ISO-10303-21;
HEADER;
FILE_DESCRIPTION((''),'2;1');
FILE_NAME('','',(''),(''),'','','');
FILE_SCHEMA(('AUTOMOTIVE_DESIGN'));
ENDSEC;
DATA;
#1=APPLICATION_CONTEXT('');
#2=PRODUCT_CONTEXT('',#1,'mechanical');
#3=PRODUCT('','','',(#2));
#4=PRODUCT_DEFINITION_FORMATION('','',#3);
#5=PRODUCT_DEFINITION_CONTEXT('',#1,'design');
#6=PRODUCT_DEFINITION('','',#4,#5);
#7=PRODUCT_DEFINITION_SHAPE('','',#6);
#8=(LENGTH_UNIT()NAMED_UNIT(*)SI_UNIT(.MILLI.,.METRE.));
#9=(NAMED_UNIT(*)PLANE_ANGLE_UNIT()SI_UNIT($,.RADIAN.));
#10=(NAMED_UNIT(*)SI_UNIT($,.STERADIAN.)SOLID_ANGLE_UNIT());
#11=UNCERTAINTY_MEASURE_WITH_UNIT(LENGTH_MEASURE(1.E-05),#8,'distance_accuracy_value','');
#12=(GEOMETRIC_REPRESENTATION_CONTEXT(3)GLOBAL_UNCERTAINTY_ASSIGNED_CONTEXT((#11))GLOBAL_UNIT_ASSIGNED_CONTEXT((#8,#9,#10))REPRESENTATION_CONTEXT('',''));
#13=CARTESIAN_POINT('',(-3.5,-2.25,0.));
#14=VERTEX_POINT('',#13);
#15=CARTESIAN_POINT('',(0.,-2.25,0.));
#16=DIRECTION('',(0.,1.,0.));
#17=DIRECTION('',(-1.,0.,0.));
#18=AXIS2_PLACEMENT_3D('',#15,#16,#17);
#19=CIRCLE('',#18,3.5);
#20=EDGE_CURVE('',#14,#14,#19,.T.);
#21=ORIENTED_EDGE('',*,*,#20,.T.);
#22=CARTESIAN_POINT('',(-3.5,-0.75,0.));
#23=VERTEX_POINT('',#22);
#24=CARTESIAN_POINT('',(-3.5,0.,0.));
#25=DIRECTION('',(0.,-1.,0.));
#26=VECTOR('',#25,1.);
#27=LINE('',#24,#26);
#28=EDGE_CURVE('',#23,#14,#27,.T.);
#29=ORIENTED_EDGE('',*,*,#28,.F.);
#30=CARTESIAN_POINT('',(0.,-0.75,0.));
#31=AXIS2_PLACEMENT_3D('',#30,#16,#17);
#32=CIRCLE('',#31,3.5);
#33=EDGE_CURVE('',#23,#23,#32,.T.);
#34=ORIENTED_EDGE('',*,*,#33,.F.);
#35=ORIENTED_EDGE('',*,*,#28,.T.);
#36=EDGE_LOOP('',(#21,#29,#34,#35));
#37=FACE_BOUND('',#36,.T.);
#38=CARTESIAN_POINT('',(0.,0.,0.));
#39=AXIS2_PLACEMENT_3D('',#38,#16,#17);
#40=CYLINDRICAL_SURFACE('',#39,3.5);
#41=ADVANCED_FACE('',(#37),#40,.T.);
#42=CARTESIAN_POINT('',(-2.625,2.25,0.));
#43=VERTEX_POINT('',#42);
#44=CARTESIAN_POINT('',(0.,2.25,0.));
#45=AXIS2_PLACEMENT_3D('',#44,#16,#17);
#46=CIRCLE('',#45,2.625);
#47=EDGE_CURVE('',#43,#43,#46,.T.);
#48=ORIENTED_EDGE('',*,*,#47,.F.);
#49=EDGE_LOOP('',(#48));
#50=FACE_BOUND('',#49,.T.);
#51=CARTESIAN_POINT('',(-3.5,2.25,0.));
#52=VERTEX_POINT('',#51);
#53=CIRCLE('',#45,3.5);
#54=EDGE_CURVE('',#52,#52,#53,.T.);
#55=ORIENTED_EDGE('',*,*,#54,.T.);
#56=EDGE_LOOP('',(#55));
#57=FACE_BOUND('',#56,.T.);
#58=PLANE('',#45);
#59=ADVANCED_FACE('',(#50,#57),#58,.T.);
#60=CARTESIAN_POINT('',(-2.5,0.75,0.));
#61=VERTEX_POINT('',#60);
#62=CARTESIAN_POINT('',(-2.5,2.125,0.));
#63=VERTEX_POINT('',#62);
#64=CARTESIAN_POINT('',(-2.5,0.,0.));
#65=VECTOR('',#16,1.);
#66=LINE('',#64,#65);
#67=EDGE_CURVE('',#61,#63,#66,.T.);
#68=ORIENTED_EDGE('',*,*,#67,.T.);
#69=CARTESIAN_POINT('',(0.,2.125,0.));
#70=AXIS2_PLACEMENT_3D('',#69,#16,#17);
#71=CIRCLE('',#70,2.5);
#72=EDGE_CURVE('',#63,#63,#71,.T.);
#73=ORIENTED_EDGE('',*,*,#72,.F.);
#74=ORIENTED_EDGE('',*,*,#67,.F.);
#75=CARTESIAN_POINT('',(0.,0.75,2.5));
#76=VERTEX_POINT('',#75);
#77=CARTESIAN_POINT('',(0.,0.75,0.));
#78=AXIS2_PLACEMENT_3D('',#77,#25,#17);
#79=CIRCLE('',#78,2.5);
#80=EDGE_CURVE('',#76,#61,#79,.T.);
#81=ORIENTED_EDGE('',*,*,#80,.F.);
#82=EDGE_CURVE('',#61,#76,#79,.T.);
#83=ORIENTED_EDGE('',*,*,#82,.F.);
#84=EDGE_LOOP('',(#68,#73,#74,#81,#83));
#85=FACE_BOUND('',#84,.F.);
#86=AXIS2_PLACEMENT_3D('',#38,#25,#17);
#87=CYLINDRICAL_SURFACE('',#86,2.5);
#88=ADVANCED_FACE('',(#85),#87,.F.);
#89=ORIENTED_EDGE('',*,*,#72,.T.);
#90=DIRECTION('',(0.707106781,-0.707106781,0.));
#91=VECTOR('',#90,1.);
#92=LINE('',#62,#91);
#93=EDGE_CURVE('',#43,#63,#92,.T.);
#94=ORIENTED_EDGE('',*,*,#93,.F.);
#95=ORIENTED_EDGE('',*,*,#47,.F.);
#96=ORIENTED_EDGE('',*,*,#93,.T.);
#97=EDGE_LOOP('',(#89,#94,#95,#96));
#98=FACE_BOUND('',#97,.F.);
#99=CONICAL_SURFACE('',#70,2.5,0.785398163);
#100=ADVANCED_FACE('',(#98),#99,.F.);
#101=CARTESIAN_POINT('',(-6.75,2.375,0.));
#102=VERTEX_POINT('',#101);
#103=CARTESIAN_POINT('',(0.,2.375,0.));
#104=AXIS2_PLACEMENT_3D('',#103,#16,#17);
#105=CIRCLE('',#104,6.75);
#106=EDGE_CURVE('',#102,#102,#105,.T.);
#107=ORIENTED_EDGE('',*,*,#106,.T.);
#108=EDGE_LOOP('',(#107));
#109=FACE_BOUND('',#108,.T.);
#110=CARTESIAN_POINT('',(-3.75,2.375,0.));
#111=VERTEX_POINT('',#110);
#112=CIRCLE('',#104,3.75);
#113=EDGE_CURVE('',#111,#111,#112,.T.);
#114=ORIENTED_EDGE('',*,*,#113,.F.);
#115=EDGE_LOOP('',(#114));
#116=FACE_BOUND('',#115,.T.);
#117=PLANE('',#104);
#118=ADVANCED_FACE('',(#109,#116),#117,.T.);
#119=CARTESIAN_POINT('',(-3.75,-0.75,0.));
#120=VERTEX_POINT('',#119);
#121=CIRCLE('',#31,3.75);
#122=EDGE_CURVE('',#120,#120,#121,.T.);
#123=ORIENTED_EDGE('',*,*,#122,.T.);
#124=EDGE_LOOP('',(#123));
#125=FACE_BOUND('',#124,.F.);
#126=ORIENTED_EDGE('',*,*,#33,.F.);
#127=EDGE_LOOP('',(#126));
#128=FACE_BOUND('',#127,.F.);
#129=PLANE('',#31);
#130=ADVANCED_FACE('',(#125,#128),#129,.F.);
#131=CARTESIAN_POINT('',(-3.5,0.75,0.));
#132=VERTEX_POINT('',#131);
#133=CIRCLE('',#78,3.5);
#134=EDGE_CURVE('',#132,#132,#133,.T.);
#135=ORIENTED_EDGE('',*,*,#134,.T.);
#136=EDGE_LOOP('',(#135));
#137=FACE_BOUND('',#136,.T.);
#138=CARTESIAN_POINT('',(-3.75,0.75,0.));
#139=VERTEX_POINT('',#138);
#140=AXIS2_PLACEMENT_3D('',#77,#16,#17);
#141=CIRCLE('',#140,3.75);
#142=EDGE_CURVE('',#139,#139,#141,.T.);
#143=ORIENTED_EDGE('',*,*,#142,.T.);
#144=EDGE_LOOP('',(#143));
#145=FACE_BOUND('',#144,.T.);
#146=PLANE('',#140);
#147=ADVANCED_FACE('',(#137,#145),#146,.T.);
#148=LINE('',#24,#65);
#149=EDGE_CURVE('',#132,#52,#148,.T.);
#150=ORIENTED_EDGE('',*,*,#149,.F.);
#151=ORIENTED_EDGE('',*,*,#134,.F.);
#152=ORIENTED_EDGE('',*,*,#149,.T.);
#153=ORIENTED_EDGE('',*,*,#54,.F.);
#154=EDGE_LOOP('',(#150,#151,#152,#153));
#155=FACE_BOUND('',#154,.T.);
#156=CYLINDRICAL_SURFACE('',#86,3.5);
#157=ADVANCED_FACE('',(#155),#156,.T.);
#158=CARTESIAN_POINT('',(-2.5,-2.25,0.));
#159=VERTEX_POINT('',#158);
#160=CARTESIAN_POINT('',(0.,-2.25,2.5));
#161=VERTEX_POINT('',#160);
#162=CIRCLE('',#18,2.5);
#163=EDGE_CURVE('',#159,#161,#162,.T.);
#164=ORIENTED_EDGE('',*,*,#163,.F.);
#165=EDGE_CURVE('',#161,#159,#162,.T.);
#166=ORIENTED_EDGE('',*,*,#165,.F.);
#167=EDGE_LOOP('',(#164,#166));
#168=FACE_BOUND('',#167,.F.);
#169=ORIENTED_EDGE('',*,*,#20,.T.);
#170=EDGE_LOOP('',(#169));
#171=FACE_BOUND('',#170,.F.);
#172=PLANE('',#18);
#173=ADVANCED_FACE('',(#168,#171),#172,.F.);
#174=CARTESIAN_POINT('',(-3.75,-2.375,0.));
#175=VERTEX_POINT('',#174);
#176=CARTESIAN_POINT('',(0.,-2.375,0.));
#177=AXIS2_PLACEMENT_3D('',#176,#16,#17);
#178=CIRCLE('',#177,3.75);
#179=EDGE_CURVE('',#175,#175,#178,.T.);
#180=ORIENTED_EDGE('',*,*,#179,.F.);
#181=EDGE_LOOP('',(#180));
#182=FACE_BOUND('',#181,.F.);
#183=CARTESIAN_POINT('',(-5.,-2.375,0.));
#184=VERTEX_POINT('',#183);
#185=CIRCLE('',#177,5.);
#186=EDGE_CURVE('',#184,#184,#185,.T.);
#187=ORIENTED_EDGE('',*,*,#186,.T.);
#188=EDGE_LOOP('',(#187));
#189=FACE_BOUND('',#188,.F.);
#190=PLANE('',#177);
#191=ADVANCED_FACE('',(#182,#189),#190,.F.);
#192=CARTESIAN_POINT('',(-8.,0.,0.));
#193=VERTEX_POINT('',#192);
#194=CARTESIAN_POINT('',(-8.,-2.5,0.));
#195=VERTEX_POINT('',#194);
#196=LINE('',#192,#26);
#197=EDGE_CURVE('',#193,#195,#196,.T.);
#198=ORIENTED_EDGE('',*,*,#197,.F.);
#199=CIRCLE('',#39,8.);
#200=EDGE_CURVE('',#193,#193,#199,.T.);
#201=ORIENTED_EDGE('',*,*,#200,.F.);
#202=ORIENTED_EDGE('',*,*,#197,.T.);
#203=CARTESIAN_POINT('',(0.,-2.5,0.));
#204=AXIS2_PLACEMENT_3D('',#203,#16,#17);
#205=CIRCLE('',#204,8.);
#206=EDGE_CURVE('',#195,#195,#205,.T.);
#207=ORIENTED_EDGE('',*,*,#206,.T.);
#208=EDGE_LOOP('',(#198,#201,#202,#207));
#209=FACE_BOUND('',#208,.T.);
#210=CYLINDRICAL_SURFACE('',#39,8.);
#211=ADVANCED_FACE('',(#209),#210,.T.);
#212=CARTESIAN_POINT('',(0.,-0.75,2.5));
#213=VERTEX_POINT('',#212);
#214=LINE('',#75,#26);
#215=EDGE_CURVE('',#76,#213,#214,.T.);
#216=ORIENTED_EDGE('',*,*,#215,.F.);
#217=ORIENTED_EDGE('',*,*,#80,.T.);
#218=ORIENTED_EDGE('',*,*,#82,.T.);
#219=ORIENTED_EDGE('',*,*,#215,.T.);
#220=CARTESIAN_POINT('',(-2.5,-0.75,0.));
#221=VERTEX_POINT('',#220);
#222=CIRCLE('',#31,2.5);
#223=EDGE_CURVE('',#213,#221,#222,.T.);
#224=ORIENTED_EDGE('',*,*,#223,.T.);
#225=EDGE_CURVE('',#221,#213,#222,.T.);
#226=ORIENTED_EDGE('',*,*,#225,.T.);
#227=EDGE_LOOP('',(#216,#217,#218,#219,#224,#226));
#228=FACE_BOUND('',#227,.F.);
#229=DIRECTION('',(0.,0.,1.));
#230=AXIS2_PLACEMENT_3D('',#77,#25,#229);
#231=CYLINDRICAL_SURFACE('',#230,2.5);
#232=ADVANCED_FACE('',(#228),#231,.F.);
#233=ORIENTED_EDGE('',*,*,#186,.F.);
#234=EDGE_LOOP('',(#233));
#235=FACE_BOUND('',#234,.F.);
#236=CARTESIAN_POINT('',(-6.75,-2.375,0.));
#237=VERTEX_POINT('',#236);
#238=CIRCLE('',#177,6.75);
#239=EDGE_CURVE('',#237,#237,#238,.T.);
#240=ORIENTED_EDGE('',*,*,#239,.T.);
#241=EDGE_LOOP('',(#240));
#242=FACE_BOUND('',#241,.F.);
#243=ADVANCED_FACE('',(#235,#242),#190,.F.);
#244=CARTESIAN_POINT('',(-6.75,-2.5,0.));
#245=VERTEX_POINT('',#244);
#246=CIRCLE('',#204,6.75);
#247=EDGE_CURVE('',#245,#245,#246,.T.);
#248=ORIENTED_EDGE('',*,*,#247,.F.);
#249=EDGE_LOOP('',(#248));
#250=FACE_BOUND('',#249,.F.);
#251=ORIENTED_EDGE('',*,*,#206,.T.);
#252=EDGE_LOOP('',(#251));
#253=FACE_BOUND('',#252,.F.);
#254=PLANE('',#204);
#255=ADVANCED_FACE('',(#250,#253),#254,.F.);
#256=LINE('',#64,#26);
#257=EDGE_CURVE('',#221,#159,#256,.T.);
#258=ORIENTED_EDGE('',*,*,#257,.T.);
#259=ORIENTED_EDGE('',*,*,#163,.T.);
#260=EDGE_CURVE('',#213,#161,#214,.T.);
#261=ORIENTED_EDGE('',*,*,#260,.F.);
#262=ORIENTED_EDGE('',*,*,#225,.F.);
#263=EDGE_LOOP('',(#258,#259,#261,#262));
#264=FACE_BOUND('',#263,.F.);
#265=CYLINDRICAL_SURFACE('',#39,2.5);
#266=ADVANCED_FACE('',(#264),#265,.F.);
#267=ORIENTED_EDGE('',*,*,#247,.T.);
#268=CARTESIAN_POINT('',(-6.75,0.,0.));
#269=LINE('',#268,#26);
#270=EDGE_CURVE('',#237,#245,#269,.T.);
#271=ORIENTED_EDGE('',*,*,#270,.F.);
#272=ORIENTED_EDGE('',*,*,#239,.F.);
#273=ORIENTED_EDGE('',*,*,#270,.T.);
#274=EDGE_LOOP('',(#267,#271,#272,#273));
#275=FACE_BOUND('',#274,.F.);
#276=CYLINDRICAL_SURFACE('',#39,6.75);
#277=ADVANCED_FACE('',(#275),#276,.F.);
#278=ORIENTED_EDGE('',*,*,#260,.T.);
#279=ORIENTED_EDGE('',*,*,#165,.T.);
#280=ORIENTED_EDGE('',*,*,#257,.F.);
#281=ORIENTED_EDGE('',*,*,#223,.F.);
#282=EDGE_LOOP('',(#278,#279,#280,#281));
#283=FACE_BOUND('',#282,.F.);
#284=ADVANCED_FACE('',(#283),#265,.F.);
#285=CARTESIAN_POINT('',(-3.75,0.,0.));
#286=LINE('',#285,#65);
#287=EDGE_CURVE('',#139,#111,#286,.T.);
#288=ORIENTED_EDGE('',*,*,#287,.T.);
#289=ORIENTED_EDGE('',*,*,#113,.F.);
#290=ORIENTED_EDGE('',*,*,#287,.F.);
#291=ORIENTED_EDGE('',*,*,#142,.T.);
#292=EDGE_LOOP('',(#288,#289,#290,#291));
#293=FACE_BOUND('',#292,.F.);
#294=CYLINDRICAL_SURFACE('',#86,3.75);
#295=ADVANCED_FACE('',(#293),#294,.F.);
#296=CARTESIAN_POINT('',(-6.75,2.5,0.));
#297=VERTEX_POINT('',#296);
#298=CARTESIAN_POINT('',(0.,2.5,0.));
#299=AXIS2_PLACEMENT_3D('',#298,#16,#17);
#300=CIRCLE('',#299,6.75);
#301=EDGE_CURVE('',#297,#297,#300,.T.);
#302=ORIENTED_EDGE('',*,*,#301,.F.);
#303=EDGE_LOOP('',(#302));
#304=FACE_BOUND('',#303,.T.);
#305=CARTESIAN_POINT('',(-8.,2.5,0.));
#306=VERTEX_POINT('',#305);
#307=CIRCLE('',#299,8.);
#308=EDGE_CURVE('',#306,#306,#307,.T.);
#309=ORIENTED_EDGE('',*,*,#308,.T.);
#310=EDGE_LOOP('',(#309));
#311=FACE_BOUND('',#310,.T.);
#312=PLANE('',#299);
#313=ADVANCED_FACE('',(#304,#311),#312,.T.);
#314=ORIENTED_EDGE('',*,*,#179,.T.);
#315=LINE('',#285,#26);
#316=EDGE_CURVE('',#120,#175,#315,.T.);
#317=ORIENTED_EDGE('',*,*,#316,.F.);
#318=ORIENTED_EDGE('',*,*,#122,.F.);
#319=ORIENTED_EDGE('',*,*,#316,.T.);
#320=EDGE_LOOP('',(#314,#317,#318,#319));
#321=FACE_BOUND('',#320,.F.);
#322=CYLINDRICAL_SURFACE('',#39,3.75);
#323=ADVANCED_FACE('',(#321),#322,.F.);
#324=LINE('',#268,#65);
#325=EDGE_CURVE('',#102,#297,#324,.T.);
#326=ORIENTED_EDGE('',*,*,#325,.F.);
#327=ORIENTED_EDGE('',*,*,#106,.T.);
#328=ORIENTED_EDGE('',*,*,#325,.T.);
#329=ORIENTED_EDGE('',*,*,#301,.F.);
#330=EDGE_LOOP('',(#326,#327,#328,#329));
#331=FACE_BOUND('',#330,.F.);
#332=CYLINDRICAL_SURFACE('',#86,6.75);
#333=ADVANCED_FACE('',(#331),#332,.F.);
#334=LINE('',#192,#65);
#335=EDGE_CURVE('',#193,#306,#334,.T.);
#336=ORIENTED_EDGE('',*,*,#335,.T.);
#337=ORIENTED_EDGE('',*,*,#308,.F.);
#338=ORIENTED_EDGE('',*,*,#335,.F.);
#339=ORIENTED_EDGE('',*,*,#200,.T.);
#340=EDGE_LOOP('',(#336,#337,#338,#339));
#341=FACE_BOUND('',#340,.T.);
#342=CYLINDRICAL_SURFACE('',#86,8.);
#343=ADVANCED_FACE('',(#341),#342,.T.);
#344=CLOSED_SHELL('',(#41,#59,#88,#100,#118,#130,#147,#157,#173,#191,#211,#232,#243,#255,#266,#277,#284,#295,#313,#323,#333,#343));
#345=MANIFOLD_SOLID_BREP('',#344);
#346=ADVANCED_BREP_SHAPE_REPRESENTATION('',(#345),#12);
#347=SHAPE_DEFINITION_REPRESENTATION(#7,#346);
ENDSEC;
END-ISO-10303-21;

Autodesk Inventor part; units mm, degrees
ref_plane "YZ Plane" through (0, 0, 0) normal (1, 0, 0) x (0, 1, 0)
ref_plane "XZ Plane" through (0, 0, 0) normal (0, 1, 0) x (-1, 0, 0)
ref_plane "XY Plane" through (0, 0, 0) normal (0, 0, 1) x (1, 0, 0)
sketch "Szkic1" plane through (0, 0, 0) normal (0, 1, 0) x (-1, 0, 0)
  circle A0 centre (0, 0) radius 2.5
  circle A1 centre (0, 0) radius 8
  circle A2 centre (0, 0) radius 3.5
  circle A3 centre (0, 0) radius 3.5
  circle A4 centre (0, 0) radius 6.75
  circle A5 centre (0, 0) radius 5
  circle A6 centre (0, 0) radius 3.75
  dimension "d0" = 5
  dimension "d1" = 16
  dimension "d2" = 7
  dimension "d3" = 7
  dimension "d4" = 13.5
  dimension "d13" = 10
  dimension "d16" = 7.5
extrude "Wyciągnięcie proste7" add sketch "Szkic1" along normal mid plane 4.5 contours A2
extrude "Wyciągnięcie proste8" add sketch "Szkic1" along normal mid plane 4.75 contours A5
extrude "Wyciągnięcie proste9" add sketch "Szkic1" along normal mid plane 1.5 contours A0 | A2 | A6
extrude "Wyciągnięcie proste10" add sketch "Szkic1" along normal mid plane 5 contours A1
extrude "Wyciągnięcie proste11" add sketch "Szkic1" along normal mid plane 4.75 contours A4
sketch "Szkic2" plane through (0, 0.75, 0) normal (0, 1, 0) x (1, 0, 0)
  point P0 (0, 0)
  point P1 (0.0085, 0.051)
hole "Otwór3" at (0, 0.75, 0) direction (0, -1, 0) diameter 5 end through all
chamfer "Faza3" distance 0.125 angle 45 1 edges at (2.5, 2.25, 0)
properties part number "lozysko"
